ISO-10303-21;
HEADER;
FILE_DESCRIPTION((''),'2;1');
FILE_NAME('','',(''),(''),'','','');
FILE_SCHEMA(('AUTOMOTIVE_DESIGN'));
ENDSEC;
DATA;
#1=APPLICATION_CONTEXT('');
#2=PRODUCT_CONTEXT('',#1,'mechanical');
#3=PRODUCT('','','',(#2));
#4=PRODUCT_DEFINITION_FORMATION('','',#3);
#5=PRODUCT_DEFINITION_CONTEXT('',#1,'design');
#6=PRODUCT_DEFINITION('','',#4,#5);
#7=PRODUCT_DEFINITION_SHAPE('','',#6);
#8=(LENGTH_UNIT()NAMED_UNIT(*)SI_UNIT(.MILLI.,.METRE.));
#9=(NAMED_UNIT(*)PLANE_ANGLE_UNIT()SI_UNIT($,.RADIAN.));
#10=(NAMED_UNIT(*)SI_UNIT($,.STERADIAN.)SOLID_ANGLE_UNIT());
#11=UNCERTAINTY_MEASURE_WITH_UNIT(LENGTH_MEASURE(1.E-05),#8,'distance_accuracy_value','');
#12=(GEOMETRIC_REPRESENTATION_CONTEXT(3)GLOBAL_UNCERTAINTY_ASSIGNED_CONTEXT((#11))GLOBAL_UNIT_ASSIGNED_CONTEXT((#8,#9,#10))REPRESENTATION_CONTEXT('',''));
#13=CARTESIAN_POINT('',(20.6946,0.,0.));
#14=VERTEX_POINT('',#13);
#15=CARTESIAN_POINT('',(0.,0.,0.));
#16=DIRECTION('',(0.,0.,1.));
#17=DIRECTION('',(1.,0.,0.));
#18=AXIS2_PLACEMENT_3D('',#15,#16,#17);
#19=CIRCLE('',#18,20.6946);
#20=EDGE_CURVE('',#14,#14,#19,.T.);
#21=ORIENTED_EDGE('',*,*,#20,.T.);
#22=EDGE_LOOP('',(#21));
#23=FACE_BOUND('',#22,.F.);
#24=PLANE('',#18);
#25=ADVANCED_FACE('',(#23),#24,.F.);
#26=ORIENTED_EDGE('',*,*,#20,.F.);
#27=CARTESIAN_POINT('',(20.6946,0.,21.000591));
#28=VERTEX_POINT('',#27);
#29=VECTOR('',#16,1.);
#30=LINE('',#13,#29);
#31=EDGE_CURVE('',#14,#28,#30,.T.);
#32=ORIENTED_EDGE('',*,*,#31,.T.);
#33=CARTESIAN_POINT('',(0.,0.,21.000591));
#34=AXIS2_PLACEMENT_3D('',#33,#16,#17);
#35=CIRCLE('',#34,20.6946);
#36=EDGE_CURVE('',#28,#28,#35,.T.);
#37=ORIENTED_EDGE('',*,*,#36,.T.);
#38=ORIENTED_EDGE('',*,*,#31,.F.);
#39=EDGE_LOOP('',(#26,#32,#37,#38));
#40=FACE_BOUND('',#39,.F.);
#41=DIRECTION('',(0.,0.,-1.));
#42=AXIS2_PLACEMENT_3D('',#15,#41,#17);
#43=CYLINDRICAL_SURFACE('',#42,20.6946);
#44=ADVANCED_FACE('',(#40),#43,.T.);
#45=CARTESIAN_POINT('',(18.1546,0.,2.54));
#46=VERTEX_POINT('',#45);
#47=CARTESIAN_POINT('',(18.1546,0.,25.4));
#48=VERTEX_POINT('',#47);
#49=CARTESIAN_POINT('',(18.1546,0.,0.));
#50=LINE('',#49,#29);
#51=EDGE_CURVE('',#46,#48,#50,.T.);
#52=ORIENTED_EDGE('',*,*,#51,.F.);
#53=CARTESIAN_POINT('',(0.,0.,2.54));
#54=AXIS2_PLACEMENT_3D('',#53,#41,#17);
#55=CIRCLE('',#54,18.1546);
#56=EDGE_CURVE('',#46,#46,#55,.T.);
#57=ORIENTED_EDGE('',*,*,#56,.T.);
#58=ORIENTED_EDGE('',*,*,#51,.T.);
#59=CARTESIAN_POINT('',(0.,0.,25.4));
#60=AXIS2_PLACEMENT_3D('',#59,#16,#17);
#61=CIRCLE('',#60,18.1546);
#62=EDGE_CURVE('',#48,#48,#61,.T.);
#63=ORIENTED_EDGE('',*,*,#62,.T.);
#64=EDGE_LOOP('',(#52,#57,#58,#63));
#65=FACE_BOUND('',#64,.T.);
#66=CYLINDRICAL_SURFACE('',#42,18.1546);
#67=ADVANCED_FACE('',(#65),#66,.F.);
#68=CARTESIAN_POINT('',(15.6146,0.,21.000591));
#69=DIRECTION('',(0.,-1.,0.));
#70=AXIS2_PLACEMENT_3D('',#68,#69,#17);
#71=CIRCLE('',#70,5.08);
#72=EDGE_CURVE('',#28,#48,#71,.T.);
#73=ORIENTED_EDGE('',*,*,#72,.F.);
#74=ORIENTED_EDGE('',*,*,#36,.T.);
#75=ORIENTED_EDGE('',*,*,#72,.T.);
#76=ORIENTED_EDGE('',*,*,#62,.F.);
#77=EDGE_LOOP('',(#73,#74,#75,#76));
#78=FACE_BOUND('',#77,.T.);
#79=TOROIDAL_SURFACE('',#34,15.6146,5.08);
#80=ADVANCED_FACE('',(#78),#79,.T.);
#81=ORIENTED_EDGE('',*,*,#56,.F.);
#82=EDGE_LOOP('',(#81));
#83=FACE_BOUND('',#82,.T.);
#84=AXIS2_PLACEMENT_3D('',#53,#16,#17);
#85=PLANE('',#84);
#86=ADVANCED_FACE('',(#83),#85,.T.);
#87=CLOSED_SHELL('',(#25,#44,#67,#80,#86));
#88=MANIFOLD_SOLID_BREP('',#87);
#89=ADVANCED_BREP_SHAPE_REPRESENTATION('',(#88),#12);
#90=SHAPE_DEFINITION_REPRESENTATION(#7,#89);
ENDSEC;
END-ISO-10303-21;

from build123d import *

# Parameters (mm, degrees)
F0_R     = 20.6945995874
F1_DEPTH = 25.4
F2_T     = -2.54


# Not quite as in the source:
# - a fillet or chamfer that OpenCascade refuses, or shapes differently, is made with other operations: its cross-section is extruded or revolved along the edge and cut away or added


with BuildPart() as f1:
    # F0 (on Top) → F1 (new body)
    with BuildSketch(Plane.XY):
        Circle(F0_R)
    extrude(amount=F1_DEPTH)

    # F2
    f2_openings = [f1.faces().sort_by_distance(p)[0] for p in [
        (0, 0, 25.4),
    ]]
    offset(amount=F2_T, openings=f2_openings)

    # F3: fillet of radius 5.08 on 1 edges, made by hand

    # F3_s1 → F3_t2 (revolve, cut)
    with BuildSketch(Plane.XZ):
        with BuildLine():
            ThreePointArc((20.6945995874, 21.0005909488), (20.0140086386, 23.5405909488), (18.1545995874, 25.4))
            Line((18.1545995874, 25.4), (20.6945995874, 25.4))
            Line((20.6945995874, 25.4), (20.6945995874, 21.0005909488))
        make_face()
    revolve(axis=Axis((0, 0, 25.4), (0, 0, 1)), mode=Mode.SUBTRACT)


solid = f1.part
